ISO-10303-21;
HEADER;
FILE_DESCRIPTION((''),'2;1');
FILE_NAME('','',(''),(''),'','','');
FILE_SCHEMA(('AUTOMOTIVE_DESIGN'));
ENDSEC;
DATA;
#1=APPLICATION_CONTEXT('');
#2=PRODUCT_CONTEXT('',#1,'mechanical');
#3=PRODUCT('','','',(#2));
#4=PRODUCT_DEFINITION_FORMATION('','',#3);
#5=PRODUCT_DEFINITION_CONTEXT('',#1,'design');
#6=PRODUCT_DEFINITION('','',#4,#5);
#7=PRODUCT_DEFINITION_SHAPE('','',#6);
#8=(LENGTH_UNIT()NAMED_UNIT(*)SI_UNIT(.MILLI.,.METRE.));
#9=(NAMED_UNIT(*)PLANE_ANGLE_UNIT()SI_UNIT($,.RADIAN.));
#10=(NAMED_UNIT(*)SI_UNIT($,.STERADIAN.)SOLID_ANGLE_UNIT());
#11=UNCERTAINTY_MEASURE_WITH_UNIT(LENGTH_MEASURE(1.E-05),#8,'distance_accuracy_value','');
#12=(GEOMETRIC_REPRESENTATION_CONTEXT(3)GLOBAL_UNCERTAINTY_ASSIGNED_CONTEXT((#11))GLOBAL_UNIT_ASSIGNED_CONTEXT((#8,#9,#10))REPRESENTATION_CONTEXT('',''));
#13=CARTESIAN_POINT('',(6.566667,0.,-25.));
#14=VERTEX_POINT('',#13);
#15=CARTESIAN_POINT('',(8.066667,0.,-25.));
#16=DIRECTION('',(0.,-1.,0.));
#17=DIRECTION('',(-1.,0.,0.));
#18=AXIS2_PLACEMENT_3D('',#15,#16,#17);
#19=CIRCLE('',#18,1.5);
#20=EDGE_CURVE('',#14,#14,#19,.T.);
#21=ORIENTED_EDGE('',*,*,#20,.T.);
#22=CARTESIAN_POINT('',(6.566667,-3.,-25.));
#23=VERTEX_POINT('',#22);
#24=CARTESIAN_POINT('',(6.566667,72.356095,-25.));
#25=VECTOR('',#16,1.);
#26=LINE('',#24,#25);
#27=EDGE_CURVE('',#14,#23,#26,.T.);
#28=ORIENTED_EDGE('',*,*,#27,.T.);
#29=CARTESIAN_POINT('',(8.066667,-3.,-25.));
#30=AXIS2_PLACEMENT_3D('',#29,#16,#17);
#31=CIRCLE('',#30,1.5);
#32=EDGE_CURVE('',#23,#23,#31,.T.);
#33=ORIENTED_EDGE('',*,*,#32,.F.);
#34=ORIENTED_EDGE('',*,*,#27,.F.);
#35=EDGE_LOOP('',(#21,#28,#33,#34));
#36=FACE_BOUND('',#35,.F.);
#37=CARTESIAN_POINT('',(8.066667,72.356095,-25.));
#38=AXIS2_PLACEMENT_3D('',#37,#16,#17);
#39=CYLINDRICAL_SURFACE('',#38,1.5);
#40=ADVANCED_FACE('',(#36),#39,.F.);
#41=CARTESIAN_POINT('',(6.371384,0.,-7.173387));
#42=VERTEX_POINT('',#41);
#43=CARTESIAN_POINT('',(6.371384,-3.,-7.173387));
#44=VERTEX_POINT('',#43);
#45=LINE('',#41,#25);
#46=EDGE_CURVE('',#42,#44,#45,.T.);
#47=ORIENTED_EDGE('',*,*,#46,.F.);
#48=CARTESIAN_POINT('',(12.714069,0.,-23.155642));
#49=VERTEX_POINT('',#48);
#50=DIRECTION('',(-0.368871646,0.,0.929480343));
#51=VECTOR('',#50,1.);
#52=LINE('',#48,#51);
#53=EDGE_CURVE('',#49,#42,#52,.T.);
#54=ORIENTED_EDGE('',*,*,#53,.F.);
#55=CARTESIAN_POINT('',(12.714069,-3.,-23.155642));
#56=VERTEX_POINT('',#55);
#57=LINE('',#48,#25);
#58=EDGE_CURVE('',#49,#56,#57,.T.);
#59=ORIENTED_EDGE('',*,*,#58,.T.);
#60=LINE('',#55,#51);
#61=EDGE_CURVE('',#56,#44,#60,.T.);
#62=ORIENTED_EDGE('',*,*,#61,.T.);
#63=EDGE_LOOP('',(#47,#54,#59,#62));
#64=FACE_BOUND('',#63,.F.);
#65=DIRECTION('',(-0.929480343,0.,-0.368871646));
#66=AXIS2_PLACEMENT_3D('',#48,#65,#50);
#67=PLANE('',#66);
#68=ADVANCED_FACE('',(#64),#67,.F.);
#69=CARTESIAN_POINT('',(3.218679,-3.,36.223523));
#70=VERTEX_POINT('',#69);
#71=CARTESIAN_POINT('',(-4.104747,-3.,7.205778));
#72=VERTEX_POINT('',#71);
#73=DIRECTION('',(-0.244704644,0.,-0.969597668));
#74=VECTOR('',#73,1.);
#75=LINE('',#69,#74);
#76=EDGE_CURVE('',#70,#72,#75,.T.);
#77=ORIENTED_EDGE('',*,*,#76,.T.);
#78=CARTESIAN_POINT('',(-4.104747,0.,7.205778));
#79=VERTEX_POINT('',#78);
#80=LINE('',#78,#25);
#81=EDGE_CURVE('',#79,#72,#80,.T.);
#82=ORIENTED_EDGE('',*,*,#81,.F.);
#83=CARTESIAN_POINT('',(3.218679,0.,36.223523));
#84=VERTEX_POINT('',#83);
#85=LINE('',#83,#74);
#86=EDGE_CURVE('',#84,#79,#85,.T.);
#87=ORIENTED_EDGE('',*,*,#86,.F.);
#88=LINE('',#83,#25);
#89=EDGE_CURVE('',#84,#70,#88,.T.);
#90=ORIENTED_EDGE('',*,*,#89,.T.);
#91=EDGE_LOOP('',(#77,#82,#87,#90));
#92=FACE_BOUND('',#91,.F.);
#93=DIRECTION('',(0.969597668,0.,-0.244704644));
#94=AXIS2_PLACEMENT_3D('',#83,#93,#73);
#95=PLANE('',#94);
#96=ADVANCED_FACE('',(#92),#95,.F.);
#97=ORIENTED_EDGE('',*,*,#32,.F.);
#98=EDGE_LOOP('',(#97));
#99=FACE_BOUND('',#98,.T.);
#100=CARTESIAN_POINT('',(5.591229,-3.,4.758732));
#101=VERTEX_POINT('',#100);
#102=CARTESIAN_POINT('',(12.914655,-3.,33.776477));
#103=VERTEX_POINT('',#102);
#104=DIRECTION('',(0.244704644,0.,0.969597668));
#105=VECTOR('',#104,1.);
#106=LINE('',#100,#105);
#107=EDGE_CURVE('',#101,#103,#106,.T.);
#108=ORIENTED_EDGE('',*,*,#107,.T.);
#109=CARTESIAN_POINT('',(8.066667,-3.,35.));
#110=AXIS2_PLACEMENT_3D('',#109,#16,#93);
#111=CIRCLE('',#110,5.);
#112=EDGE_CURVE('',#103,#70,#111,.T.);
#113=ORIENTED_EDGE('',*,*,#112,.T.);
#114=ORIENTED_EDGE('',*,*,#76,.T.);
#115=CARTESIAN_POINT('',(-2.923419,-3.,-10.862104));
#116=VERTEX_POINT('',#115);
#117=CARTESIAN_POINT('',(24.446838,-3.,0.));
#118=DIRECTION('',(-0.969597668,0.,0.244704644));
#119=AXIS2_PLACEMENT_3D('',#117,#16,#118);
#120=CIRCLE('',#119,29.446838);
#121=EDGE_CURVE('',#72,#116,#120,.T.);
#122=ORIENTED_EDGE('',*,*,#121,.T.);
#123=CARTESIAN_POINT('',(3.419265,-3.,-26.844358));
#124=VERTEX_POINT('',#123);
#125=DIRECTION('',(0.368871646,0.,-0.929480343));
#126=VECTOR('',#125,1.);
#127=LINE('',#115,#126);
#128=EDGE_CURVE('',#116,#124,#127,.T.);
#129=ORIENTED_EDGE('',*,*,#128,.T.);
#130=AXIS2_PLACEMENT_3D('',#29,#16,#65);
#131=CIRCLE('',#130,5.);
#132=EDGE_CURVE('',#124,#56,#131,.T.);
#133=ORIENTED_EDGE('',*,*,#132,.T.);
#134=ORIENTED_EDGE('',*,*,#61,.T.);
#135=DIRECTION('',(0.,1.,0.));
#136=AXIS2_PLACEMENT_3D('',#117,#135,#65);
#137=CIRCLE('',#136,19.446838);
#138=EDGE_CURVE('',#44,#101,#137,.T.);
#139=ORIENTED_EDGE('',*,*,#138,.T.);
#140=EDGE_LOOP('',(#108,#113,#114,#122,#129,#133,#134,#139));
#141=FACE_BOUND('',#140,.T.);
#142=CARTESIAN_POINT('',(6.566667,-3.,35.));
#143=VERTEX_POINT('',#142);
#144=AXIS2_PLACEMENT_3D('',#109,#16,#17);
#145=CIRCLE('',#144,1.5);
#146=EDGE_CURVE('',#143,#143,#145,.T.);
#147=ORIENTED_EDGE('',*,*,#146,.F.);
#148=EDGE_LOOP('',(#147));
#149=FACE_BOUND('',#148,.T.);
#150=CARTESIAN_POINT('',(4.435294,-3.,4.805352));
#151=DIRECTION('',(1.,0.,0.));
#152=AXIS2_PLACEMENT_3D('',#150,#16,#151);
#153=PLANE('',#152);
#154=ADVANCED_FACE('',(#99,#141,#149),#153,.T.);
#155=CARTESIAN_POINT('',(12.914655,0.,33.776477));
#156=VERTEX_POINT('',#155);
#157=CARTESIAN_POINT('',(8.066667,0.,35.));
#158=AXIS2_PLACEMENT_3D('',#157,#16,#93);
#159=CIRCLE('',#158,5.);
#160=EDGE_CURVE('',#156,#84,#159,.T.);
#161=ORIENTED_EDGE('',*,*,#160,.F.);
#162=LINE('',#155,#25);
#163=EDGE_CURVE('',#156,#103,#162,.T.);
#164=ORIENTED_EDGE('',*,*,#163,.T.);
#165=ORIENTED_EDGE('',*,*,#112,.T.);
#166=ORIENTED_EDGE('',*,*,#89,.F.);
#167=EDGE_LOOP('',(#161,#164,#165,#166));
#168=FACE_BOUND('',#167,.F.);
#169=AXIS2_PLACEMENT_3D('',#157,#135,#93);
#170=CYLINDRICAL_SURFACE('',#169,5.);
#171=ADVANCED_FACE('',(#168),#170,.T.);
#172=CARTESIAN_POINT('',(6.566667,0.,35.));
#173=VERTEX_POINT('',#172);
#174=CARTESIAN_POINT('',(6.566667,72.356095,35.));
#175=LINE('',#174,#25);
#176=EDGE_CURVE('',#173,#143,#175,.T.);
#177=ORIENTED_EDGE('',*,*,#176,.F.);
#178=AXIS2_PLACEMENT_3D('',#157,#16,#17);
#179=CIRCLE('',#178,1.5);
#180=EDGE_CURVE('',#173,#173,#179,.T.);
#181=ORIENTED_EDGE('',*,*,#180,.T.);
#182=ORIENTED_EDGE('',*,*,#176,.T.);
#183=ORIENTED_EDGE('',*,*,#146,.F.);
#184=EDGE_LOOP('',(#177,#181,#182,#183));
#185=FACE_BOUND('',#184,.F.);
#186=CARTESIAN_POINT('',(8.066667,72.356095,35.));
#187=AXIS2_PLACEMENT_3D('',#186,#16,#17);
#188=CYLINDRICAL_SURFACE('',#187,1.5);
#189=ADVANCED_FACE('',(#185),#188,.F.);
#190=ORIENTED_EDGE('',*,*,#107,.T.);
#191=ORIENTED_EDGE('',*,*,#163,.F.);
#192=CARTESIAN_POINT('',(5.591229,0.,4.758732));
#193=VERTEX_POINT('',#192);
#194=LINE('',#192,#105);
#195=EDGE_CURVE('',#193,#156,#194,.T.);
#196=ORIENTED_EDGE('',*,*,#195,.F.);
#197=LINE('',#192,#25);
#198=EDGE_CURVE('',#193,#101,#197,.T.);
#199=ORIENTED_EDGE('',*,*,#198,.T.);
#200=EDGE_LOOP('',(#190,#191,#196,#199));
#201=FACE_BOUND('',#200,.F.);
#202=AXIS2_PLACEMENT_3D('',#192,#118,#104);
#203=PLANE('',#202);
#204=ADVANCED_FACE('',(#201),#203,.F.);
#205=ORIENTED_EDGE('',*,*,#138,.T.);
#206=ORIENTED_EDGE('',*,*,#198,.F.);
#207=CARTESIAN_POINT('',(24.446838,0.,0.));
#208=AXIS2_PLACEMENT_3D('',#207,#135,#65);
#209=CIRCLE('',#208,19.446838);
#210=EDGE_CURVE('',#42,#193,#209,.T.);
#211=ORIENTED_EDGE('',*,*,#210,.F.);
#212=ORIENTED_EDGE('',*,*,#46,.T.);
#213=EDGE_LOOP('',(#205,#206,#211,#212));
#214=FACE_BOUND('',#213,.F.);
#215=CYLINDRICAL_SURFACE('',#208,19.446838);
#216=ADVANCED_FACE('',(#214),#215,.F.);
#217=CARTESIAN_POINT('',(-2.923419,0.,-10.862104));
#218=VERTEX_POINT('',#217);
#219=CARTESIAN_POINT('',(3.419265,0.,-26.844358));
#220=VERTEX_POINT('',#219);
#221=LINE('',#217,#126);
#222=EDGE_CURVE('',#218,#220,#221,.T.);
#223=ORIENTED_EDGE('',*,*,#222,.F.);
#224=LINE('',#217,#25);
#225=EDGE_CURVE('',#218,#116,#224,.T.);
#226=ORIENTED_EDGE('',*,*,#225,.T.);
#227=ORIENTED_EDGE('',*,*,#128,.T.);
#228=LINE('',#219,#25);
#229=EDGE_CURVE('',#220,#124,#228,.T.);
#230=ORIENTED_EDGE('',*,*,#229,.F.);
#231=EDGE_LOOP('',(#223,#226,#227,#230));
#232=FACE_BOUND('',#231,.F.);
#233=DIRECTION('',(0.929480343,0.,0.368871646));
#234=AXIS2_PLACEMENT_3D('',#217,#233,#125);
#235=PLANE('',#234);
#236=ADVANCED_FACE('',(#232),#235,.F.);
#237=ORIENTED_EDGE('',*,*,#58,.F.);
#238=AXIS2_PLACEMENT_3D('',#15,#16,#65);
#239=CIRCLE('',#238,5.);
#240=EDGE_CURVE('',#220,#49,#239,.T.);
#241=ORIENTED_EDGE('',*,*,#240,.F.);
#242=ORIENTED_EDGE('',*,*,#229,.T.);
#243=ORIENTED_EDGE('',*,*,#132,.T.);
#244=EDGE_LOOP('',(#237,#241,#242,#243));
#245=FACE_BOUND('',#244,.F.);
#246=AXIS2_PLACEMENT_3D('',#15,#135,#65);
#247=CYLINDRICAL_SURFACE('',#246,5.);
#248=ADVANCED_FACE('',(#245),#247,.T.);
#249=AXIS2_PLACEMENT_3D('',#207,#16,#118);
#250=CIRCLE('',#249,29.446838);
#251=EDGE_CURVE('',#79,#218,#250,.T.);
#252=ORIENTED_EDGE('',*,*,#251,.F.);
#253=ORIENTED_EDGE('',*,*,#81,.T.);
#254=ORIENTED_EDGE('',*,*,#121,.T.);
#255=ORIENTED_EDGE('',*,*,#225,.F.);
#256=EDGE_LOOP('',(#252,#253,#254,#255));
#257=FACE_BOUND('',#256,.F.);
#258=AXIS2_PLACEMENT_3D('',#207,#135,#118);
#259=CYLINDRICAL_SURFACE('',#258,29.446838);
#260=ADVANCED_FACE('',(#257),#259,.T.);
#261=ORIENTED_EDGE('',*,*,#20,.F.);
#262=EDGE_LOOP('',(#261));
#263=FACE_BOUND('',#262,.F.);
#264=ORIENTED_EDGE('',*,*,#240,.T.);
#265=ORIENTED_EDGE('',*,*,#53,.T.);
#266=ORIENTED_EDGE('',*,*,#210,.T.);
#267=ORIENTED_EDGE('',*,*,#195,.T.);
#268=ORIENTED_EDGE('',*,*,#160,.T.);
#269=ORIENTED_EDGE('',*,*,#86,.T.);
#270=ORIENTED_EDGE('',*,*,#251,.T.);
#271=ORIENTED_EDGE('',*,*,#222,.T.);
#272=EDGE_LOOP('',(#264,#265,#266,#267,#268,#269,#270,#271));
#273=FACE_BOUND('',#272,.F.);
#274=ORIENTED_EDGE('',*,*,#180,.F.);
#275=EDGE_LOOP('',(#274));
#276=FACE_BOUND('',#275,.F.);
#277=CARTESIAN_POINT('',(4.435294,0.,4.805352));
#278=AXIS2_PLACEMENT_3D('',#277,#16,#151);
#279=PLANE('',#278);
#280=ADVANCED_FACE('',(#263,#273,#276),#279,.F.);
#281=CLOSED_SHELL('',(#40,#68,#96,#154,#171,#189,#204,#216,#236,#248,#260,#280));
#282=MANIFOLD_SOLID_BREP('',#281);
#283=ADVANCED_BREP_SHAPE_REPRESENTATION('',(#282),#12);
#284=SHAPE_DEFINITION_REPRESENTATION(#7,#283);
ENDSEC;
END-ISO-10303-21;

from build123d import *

# Parameters (mm, degrees)
F1_DEPTH = 3
F2_D     = 3


# Not quite as in the source:
# - a feature of the source that left no trace in its solid (it failed there, or was rolled back) is left out


with BuildPart() as f1:
    # F0 (on Front) → F1 (new body)
    with BuildSketch(Plane.XZ):
        with BuildLine():
            ThreePointArc((6.3713843202, -7.1733870463), (5.0414339245, -1.2687792727), (5.5912292227, 4.7587315024))
            Line((5.5912292227, 4.7587315024), (12.9146554895, 33.77647678))
            ThreePointArc((12.9146554895, 33.77647678), (9.290190371, 39.8479883385), (3.2186788125, 36.22352322))
            Line((3.2186788125, 36.22352322), (-4.1047474542, 7.2057779424))
            ThreePointArc((-4.1047474542, 7.2057779424), (-4.9372598224, -1.9212140236), (-2.9234191128, -10.8621035089))
            Line((-2.9234191128, -10.8621035089), (3.4192654345, -26.8443582313))
            ThreePointArc((3.4192654345, -26.8443582313), (9.9110253823, -29.6474017165), (12.7140688675, -23.1556417687))
            Line((12.7140688675, -23.1556417687), (6.3713843202, -7.1733870463))
        make_face()
    extrude(amount=F1_DEPTH)

    # F2 (through all)
    with Locations(Plane(origin=(0, 0, 0), x_dir=(1, 0, 0), z_dir=(0, 1, 0))):
        with Locations((8.066667151, -35), (8.066667151, 25)):
            Hole(F2_D / 2)


solid = f1.part
